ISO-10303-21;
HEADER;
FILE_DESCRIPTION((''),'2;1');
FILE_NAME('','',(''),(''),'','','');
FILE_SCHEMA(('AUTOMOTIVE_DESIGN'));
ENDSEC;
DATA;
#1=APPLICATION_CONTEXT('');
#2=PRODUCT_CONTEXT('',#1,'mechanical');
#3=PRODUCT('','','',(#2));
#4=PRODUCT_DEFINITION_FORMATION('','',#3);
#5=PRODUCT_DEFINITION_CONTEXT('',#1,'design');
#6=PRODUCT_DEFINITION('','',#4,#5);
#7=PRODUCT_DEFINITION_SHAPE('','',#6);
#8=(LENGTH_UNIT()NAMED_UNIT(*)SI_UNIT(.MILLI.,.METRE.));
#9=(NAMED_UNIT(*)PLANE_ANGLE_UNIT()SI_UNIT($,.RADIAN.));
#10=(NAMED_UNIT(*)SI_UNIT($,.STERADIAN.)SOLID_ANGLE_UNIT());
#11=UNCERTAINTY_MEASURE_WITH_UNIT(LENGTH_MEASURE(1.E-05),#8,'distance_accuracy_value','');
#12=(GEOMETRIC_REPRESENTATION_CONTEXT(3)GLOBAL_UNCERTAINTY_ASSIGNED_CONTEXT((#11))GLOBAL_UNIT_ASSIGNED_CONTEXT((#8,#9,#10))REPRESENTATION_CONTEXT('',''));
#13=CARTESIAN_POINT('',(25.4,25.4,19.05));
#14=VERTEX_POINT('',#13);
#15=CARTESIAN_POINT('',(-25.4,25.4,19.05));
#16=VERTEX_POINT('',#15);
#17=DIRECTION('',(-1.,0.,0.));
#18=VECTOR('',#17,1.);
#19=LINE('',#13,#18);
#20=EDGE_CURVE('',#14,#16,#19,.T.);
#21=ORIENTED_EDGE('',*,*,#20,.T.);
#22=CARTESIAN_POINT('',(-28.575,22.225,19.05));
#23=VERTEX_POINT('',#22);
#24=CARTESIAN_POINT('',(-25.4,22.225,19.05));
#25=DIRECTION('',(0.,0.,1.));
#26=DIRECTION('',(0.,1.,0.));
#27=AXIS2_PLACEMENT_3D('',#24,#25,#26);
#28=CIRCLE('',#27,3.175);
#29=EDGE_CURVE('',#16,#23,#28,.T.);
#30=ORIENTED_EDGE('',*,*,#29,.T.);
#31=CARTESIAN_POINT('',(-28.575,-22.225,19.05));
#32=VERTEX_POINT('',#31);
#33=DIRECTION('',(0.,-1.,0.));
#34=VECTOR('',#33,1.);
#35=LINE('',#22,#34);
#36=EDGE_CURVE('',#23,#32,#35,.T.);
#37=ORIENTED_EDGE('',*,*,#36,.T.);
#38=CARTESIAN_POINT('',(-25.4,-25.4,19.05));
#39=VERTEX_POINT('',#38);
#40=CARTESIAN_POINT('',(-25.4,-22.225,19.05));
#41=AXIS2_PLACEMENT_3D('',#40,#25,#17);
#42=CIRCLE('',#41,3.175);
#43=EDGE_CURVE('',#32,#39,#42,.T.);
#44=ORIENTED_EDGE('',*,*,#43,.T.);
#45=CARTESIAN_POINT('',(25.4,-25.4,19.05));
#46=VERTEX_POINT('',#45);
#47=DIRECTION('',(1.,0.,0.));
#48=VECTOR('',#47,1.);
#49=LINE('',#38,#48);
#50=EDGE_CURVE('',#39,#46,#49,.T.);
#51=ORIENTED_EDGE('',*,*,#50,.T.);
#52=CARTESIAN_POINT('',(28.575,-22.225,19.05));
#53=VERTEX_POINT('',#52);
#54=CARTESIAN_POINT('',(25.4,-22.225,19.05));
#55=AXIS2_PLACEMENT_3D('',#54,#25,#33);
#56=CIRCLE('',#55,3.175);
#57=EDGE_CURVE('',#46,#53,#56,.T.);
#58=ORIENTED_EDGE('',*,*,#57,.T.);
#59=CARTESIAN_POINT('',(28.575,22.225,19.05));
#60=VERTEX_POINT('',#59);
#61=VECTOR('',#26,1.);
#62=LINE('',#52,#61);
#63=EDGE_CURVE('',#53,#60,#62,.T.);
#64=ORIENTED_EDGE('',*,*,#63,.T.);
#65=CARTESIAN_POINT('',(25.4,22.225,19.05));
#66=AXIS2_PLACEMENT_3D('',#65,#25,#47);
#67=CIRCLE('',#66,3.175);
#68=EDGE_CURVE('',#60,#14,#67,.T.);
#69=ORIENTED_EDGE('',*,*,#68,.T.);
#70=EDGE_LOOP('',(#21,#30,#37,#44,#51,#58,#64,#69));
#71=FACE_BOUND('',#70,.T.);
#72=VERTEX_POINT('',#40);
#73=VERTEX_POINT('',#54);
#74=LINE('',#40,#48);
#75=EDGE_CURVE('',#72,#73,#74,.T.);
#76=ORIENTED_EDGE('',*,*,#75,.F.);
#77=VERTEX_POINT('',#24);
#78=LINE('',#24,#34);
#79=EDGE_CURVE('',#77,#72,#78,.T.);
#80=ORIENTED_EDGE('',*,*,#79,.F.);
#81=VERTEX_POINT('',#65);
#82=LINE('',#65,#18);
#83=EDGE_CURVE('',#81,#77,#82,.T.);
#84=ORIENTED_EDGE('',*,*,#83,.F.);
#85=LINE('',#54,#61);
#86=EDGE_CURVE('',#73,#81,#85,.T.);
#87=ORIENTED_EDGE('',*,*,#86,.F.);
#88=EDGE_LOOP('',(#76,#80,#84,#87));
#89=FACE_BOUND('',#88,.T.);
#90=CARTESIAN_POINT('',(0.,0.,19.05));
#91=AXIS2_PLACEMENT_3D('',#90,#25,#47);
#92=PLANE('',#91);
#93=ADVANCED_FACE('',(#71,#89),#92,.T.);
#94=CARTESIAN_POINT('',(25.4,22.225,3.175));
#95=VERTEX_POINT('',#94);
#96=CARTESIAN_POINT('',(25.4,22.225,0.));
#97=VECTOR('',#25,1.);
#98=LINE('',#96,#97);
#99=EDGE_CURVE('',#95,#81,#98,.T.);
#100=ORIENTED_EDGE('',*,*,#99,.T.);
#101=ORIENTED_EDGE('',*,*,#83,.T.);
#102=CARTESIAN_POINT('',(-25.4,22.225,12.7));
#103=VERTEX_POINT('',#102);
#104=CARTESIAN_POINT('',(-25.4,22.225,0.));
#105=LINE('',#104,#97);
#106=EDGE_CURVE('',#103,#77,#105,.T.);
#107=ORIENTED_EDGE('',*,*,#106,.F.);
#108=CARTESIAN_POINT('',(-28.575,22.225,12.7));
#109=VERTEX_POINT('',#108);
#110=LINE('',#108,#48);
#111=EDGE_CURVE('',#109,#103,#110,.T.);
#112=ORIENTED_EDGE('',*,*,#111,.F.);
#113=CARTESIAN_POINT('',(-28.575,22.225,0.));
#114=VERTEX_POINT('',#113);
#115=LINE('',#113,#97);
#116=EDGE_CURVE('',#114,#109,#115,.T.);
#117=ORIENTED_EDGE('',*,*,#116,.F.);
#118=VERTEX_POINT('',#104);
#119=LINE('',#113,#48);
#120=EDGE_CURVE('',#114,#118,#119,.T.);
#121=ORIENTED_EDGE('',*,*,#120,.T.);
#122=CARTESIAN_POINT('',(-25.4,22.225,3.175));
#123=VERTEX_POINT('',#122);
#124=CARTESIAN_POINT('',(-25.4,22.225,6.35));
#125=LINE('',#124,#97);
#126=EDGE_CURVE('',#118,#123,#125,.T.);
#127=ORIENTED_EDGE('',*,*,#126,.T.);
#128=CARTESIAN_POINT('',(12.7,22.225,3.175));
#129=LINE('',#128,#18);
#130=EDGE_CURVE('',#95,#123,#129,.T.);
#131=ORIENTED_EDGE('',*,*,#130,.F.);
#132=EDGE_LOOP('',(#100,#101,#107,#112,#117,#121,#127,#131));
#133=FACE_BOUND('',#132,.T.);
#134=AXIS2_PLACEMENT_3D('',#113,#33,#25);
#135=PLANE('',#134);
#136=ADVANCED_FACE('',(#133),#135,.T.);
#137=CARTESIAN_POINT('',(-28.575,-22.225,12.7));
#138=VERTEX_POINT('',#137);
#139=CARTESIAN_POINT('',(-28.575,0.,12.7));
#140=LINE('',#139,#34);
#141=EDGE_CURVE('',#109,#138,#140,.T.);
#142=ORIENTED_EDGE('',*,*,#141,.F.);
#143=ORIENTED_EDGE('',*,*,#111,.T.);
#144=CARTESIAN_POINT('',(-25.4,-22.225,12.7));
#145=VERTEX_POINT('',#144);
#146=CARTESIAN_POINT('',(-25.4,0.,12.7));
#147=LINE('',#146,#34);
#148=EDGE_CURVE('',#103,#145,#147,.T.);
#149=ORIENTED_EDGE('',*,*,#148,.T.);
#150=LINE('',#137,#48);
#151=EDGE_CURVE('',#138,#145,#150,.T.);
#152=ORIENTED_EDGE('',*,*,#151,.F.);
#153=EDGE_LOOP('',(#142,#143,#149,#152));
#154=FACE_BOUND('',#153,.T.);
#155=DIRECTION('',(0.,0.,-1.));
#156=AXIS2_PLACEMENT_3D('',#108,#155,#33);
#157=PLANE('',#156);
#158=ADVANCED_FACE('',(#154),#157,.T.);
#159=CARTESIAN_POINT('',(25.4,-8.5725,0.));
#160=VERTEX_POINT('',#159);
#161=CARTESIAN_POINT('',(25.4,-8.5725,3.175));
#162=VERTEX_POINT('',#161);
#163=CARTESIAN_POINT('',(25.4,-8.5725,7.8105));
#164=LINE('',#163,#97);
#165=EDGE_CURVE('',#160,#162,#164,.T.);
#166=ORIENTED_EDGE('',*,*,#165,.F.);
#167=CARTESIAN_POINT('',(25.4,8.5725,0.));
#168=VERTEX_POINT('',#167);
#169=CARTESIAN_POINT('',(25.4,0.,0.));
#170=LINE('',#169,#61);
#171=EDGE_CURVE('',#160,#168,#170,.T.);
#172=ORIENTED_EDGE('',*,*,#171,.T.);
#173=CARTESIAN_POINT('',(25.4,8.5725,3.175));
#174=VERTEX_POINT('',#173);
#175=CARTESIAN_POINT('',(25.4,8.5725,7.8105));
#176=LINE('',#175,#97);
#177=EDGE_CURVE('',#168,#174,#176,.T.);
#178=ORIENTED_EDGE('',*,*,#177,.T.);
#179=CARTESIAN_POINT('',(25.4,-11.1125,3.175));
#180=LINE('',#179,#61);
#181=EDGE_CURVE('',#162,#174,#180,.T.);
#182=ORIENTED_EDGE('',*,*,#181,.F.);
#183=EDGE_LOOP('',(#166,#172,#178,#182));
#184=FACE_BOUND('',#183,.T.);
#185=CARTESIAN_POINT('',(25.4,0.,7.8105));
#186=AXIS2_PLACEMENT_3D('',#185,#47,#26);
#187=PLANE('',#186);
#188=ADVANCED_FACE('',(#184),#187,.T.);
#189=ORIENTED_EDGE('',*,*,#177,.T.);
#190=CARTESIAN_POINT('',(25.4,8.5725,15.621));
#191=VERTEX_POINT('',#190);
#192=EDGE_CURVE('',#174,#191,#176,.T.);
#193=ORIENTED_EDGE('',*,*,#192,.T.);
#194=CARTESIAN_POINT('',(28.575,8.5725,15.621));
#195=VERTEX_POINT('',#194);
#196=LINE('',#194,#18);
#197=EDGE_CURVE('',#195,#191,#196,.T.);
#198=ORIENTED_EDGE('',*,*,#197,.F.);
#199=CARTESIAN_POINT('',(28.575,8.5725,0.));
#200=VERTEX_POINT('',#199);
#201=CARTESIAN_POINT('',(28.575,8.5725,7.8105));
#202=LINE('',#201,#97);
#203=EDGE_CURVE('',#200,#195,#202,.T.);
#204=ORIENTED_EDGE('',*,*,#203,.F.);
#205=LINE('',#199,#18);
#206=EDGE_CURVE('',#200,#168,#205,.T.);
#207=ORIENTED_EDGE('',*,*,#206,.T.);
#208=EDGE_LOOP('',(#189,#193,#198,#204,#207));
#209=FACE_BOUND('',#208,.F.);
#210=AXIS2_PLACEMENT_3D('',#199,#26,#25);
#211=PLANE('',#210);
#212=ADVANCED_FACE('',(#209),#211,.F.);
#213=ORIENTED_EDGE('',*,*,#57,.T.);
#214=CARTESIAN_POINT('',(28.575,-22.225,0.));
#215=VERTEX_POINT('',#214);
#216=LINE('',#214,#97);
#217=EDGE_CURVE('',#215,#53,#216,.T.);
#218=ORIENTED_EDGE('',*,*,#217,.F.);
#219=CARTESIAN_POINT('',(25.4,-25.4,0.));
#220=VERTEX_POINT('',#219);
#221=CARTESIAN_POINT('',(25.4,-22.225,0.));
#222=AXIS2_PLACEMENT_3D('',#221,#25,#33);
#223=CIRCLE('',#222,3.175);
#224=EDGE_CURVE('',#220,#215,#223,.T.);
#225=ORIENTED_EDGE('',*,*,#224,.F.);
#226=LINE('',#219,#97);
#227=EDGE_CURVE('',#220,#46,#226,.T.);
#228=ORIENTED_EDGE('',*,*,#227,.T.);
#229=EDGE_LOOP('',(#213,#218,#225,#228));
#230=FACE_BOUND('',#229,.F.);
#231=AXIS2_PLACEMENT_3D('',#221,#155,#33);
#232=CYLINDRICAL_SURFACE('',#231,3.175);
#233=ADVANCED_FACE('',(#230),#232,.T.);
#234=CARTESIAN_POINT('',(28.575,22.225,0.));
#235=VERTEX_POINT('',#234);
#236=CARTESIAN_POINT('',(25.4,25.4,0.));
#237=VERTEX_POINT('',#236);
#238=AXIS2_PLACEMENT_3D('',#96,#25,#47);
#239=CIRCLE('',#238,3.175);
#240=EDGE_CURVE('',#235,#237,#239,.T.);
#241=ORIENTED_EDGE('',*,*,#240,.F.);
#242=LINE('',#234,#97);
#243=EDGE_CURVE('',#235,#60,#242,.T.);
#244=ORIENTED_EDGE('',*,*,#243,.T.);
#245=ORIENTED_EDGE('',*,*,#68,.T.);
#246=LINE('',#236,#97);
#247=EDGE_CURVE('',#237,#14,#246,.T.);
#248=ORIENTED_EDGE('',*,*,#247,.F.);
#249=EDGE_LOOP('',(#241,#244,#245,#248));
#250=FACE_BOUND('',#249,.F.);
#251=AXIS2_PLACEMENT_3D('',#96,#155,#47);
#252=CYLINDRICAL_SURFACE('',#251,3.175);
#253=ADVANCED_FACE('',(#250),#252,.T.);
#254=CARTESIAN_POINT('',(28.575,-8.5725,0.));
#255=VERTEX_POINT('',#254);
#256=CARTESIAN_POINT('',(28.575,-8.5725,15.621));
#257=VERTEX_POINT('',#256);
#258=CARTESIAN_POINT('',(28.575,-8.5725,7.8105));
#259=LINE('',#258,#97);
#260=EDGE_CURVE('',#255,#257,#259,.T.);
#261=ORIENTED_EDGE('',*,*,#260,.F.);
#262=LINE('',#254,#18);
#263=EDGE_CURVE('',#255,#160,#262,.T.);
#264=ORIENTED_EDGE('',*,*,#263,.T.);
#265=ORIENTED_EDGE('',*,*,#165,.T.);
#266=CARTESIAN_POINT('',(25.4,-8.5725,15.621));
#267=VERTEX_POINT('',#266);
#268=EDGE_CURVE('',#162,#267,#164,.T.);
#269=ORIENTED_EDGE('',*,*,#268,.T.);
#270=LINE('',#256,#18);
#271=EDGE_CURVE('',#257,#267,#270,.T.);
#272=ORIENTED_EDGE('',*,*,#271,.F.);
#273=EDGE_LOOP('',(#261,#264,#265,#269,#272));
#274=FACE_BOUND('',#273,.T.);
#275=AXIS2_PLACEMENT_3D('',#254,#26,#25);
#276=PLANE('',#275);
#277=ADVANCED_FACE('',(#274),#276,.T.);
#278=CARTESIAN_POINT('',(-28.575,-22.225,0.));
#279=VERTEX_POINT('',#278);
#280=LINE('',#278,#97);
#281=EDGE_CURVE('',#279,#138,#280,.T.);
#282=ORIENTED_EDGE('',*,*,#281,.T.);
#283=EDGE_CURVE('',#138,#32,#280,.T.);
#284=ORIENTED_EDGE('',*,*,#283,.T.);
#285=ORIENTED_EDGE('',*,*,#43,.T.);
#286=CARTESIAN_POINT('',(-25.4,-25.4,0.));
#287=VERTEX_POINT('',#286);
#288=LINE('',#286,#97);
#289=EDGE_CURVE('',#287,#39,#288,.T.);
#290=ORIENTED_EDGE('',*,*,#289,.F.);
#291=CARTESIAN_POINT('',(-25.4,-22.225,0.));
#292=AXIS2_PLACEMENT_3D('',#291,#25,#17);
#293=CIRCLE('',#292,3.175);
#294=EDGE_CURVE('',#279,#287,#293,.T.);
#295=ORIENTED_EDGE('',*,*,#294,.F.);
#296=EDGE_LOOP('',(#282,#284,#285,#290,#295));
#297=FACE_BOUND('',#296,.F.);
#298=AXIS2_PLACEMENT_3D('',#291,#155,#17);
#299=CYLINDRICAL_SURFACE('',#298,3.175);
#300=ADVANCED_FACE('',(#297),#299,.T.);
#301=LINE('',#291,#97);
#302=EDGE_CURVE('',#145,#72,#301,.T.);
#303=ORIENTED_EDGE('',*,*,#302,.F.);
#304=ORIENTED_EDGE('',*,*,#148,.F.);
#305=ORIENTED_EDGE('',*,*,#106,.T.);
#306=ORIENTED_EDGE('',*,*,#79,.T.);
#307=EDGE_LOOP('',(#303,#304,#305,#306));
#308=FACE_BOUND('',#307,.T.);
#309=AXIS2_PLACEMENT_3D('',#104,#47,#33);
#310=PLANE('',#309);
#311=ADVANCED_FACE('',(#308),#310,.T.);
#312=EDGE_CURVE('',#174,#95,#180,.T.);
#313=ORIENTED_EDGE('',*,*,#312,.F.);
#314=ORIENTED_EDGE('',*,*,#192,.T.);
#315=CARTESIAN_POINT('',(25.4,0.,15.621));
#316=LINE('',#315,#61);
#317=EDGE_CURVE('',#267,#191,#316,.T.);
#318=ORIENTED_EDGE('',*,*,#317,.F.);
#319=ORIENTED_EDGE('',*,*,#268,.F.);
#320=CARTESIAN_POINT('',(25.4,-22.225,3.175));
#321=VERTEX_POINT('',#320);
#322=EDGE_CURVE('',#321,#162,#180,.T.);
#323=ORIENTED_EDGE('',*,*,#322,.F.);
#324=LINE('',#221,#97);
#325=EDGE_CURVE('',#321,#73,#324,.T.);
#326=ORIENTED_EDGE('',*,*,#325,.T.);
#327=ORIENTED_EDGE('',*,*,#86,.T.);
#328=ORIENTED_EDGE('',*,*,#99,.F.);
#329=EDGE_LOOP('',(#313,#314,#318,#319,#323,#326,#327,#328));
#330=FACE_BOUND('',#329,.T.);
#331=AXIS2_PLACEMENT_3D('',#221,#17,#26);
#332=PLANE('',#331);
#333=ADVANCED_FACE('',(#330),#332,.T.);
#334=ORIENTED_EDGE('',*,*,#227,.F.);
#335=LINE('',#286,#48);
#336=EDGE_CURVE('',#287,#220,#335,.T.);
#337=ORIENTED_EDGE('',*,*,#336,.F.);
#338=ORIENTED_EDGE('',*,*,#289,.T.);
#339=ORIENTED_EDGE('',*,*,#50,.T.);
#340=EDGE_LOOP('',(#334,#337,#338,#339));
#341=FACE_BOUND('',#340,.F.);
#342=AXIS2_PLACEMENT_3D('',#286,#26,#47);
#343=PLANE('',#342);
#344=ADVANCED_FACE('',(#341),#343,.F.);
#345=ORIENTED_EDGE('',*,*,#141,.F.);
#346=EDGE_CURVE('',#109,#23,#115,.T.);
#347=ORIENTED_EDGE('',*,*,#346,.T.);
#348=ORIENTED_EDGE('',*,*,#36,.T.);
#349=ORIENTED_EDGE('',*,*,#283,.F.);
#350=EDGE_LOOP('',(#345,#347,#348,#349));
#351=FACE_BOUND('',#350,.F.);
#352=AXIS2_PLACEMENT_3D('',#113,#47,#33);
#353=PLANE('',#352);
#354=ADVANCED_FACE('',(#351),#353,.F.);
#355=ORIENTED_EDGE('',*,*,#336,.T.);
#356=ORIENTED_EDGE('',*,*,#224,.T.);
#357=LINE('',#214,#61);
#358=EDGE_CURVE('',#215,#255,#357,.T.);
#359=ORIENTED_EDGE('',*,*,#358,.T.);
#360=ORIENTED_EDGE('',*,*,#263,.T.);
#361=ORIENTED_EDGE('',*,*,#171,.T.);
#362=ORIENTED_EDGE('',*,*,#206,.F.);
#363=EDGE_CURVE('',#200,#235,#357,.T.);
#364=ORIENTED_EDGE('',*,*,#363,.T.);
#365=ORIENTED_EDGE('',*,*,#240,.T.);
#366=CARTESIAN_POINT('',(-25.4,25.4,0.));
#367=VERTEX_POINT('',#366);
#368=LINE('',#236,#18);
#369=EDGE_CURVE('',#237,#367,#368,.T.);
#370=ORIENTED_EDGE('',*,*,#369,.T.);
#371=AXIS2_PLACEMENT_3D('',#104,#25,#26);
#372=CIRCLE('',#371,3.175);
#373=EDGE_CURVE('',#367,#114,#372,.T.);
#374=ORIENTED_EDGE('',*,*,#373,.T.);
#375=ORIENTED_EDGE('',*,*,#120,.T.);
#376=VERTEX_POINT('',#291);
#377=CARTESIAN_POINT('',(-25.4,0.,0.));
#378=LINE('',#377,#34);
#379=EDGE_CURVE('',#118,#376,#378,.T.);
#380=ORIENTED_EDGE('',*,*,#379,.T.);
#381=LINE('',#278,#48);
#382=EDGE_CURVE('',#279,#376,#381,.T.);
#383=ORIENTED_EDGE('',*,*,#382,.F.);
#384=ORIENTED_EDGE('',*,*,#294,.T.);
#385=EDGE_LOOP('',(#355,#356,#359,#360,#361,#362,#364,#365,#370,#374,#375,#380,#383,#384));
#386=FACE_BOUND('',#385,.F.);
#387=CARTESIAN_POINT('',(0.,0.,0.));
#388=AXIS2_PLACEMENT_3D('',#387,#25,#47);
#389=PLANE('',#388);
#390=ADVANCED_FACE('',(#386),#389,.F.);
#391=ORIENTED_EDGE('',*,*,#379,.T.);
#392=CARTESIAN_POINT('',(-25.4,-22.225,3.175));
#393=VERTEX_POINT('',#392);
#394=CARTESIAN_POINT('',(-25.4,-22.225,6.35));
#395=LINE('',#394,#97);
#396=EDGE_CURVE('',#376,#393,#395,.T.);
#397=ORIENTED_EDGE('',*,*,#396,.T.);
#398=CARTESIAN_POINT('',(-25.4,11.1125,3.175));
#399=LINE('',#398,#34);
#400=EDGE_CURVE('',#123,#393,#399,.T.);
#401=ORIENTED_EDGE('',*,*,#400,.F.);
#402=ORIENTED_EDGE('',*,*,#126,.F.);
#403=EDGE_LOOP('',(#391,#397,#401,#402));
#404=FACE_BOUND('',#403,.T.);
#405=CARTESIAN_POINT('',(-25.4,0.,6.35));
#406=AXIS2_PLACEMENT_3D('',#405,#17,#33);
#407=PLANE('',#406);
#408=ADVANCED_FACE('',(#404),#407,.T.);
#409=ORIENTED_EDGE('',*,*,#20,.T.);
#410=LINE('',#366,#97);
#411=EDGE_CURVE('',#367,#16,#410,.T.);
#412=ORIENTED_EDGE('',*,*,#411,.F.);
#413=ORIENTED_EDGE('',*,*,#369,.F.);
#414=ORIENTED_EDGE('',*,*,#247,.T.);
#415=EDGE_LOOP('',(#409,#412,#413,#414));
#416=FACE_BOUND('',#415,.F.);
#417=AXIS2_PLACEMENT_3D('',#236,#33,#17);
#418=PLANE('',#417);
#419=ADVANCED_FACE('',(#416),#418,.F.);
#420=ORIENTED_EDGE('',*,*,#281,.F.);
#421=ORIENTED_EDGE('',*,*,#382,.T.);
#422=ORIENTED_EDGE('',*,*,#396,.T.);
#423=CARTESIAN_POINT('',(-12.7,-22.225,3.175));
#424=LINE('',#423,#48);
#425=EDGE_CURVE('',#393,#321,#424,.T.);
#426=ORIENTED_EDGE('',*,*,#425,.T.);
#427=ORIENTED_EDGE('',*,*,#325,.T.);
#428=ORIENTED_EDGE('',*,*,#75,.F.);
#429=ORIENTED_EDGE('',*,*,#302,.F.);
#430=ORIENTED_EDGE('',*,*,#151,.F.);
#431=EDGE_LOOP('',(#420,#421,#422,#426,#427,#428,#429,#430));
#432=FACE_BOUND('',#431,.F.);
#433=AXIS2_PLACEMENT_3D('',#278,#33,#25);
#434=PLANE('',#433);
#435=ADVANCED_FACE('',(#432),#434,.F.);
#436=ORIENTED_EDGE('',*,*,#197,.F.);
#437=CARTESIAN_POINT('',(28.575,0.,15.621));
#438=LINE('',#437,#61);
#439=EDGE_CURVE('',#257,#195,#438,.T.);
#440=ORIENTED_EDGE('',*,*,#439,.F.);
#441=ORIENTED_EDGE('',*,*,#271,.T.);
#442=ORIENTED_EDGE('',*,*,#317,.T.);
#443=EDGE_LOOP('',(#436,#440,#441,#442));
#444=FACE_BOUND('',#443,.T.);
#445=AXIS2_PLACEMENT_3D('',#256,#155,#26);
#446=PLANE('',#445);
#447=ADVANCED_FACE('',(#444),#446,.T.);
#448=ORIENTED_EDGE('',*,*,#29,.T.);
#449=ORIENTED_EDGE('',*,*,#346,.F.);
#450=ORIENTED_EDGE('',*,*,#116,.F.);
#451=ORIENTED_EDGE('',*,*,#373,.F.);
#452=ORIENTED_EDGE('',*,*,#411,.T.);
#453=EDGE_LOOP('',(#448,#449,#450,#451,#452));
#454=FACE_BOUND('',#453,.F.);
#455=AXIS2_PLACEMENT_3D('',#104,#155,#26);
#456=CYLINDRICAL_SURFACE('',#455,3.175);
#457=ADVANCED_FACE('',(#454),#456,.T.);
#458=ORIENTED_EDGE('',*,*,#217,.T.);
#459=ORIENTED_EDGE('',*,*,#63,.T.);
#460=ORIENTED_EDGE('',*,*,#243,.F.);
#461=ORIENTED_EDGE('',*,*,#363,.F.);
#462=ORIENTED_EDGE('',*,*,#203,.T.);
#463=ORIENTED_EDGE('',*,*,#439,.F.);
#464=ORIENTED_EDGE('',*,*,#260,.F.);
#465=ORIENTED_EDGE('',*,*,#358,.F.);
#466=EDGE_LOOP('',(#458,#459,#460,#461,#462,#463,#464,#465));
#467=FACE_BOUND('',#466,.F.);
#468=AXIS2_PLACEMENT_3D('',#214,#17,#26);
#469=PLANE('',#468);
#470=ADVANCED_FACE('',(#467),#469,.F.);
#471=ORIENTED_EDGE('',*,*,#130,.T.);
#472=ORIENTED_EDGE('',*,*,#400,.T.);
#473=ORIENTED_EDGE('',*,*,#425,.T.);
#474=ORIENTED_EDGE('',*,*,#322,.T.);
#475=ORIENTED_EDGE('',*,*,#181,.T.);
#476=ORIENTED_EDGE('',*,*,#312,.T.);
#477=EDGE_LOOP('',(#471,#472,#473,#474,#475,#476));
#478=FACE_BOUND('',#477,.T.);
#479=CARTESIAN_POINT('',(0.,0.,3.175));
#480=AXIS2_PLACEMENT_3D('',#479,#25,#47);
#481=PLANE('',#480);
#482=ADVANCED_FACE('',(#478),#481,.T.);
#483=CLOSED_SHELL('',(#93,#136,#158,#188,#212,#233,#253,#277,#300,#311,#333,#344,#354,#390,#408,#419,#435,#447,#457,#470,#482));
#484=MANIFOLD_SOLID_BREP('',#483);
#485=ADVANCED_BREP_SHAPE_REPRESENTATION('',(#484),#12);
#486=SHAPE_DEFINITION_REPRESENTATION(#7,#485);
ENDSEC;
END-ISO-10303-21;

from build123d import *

# Parameters (mm, degrees)
F1_DEPTH = 19.05
F2_T     = 3.175
F3_W     = 17.145
F3_H     = 15.621
F4_DEPTH = 3.175
F5_W     = 44.45
F5_H     = 12.7
F6_DEPTH = 3.175


# Not quite as in the source:
# - a shell that OpenCascade refuses in one call is made with other operations: the cavity is built on its own and cut out


with BuildPart() as f1:
    # F0 (on Top) → F1 (new body)
    with BuildSketch(Plane.XY):
        with BuildLine():
            Line((-25.4, -25.4), (25.4, -25.4))
            ThreePointArc((25.4, -25.4), (27.6450640303, -24.4700640303), (28.575, -22.225))
            Line((28.575, -22.225), (28.575, 22.225))
            ThreePointArc((28.575, 22.225), (27.6450640303, 24.4700640303), (25.4, 25.4))
            Line((25.4, 25.4), (-25.4, 25.4))
            ThreePointArc((-25.4, 25.4), (-27.6450640303, 24.4700640303), (-28.575, 22.225))
            Line((-28.575, 22.225), (-28.575, -22.225))
            ThreePointArc((-28.575, -22.225), (-27.6450640303, -24.4700640303), (-25.4, -25.4))
        make_face()
    extrude(amount=F1_DEPTH)

    # F2: shell of thickness 3.175, made by hand


with BuildPart() as f2_core1:
    # F2_t2: copy of F1
    add(f1.part)

    # the walls: a layer under each face that stays
    f2_faces = [f2_core1.faces().sort_by_distance(p)[0] for p in [
        (0, -25.4, 9.525),
        (28.575, 0, 9.525),
        (0, 25.4, 9.525),
        (-28.575, 0, 9.525),
        (0, 0, 0),
    ]]
    thicken(f2_faces, amount=-F2_T, mode=Mode.SUBTRACT)


with BuildPart() as f1_1:
    add(f1.part)

    # what is left inside the walls is the cavity
    f2_cavity = [f2_core1.part.solids().sort_by_distance(p)[0] for p in [
        (0, -7.408333, 3.20675),
    ]]
    add(f2_cavity, mode=Mode.SUBTRACT)

    # F3 (on face) → F4 (cut)
    with BuildSketch(Plane.YZ.offset(28.575)):
        with Locations((0, 7.8105)):
            Rectangle(F3_W, F3_H)
    extrude(amount=-F4_DEPTH, mode=Mode.SUBTRACT)

    # F5 (on face) → F6 (cut)
    with BuildSketch(Plane(origin=(-28.575, 0, 0), x_dir=(0, -1, 0), z_dir=(-1, 0, 0))):
        with Locations((0, 6.35)):
            Rectangle(F5_W, F5_H)
    extrude(amount=-F6_DEPTH, mode=Mode.SUBTRACT)


solid = f1_1.part
